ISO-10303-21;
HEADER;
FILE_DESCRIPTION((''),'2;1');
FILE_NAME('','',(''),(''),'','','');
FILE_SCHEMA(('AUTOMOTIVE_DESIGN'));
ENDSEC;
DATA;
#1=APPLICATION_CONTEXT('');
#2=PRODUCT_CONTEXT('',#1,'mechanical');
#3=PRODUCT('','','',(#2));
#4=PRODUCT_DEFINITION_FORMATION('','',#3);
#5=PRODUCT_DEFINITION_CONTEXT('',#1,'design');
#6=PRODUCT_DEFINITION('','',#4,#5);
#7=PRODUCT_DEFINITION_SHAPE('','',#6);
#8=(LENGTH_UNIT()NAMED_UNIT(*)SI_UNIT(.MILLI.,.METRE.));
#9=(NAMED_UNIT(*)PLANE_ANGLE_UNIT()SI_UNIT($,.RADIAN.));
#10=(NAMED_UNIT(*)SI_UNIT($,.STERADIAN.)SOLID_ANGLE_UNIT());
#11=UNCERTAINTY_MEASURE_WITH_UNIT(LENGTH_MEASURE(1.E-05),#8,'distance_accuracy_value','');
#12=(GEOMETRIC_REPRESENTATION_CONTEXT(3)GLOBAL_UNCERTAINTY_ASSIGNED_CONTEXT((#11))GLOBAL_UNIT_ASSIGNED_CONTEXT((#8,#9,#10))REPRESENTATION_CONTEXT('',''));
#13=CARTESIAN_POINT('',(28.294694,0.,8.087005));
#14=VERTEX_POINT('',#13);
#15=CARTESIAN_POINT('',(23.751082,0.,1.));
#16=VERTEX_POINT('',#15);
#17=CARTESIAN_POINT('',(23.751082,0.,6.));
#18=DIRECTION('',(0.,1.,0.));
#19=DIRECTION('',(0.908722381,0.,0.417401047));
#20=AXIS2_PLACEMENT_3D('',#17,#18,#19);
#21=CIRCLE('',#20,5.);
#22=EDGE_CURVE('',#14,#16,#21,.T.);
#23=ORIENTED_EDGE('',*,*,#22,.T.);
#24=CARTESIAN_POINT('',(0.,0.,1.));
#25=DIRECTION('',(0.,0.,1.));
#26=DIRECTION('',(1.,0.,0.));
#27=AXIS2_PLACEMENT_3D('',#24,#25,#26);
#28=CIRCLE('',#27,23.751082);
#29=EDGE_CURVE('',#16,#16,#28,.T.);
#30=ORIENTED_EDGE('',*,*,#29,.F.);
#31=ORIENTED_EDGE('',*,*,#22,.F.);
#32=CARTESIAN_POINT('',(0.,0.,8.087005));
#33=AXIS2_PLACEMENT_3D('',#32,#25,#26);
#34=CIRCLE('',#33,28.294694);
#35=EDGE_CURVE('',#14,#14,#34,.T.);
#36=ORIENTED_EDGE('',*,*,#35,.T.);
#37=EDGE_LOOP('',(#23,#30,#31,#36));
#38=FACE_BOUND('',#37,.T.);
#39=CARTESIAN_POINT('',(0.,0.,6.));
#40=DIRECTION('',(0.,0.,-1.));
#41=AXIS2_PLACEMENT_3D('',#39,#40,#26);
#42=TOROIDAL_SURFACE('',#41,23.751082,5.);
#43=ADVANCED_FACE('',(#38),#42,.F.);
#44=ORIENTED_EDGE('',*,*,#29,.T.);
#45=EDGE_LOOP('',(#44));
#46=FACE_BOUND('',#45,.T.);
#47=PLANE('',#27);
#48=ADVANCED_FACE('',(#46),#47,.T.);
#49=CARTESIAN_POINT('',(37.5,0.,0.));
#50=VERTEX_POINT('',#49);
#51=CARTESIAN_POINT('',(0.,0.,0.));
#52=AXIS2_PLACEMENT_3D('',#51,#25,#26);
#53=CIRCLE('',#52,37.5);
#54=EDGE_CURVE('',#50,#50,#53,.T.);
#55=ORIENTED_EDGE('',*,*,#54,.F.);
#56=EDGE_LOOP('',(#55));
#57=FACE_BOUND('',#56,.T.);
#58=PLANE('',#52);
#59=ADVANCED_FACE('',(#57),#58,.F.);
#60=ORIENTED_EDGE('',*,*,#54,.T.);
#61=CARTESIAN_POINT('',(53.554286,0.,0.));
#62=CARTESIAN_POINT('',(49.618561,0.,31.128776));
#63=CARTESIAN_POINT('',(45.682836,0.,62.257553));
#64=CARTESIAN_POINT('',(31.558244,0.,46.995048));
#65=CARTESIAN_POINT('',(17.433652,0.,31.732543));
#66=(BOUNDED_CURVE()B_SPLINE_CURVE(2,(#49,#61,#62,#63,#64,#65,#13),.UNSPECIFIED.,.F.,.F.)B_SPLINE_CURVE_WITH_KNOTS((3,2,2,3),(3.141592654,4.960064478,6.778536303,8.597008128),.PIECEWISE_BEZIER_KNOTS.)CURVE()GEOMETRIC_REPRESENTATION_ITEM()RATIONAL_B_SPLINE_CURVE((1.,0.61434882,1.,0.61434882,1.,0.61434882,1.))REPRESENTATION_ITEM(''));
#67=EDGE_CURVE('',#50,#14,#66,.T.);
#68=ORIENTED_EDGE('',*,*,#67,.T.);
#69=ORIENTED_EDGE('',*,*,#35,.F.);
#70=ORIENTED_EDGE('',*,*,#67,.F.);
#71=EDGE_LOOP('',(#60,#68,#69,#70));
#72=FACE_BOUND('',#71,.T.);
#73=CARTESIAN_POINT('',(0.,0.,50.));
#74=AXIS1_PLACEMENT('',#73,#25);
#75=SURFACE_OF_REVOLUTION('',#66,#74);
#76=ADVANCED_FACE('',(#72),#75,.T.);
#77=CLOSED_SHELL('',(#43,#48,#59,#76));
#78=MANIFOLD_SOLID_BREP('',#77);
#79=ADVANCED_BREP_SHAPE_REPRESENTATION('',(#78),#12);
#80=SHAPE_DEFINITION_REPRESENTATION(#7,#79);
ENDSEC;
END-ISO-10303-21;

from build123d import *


# Not quite as in the source:
# - a feature names something its author has since deleted; it is built from what else it names


with BuildPart() as f1:
    # F0 (on Front) → F1 (revolve)
    with BuildSketch(Plane.XZ):
        with BuildLine():
            Line((0, 0), (37.5, 0))
            add(Edge.make_bspline(
                [(37.5, 0), (53.554286417, 0), (49.6185611819, 31.1287763481), (45.6828359468, 62.2575526962), (31.5582439085, 46.995048038), (17.4336518702, 31.7325433799), (28.2946943541, 8.0870052367)],
                knots=[3.1415926536, 3.1415926536, 3.1415926536, 4.9600644783, 4.9600644783, 6.778536303, 6.778536303, 8.5970081277, 8.5970081277, 8.5970081277], degree=2, weights=[1, 0.6143488203, 1, 0.6143488203, 1, 0.6143488203, 1]))
            ThreePointArc((28.2946943541, 8.0870052367), (27.9603000834, 3.3013916719), (23.7510824493, 1))
            Line((23.7510824493, 1), (0, 1))
            Line((0, 1), (0, 0))
        make_face()
    revolve(axis=Axis((0, 0, 50), (0, 0, 1)))


solid = f1.part
